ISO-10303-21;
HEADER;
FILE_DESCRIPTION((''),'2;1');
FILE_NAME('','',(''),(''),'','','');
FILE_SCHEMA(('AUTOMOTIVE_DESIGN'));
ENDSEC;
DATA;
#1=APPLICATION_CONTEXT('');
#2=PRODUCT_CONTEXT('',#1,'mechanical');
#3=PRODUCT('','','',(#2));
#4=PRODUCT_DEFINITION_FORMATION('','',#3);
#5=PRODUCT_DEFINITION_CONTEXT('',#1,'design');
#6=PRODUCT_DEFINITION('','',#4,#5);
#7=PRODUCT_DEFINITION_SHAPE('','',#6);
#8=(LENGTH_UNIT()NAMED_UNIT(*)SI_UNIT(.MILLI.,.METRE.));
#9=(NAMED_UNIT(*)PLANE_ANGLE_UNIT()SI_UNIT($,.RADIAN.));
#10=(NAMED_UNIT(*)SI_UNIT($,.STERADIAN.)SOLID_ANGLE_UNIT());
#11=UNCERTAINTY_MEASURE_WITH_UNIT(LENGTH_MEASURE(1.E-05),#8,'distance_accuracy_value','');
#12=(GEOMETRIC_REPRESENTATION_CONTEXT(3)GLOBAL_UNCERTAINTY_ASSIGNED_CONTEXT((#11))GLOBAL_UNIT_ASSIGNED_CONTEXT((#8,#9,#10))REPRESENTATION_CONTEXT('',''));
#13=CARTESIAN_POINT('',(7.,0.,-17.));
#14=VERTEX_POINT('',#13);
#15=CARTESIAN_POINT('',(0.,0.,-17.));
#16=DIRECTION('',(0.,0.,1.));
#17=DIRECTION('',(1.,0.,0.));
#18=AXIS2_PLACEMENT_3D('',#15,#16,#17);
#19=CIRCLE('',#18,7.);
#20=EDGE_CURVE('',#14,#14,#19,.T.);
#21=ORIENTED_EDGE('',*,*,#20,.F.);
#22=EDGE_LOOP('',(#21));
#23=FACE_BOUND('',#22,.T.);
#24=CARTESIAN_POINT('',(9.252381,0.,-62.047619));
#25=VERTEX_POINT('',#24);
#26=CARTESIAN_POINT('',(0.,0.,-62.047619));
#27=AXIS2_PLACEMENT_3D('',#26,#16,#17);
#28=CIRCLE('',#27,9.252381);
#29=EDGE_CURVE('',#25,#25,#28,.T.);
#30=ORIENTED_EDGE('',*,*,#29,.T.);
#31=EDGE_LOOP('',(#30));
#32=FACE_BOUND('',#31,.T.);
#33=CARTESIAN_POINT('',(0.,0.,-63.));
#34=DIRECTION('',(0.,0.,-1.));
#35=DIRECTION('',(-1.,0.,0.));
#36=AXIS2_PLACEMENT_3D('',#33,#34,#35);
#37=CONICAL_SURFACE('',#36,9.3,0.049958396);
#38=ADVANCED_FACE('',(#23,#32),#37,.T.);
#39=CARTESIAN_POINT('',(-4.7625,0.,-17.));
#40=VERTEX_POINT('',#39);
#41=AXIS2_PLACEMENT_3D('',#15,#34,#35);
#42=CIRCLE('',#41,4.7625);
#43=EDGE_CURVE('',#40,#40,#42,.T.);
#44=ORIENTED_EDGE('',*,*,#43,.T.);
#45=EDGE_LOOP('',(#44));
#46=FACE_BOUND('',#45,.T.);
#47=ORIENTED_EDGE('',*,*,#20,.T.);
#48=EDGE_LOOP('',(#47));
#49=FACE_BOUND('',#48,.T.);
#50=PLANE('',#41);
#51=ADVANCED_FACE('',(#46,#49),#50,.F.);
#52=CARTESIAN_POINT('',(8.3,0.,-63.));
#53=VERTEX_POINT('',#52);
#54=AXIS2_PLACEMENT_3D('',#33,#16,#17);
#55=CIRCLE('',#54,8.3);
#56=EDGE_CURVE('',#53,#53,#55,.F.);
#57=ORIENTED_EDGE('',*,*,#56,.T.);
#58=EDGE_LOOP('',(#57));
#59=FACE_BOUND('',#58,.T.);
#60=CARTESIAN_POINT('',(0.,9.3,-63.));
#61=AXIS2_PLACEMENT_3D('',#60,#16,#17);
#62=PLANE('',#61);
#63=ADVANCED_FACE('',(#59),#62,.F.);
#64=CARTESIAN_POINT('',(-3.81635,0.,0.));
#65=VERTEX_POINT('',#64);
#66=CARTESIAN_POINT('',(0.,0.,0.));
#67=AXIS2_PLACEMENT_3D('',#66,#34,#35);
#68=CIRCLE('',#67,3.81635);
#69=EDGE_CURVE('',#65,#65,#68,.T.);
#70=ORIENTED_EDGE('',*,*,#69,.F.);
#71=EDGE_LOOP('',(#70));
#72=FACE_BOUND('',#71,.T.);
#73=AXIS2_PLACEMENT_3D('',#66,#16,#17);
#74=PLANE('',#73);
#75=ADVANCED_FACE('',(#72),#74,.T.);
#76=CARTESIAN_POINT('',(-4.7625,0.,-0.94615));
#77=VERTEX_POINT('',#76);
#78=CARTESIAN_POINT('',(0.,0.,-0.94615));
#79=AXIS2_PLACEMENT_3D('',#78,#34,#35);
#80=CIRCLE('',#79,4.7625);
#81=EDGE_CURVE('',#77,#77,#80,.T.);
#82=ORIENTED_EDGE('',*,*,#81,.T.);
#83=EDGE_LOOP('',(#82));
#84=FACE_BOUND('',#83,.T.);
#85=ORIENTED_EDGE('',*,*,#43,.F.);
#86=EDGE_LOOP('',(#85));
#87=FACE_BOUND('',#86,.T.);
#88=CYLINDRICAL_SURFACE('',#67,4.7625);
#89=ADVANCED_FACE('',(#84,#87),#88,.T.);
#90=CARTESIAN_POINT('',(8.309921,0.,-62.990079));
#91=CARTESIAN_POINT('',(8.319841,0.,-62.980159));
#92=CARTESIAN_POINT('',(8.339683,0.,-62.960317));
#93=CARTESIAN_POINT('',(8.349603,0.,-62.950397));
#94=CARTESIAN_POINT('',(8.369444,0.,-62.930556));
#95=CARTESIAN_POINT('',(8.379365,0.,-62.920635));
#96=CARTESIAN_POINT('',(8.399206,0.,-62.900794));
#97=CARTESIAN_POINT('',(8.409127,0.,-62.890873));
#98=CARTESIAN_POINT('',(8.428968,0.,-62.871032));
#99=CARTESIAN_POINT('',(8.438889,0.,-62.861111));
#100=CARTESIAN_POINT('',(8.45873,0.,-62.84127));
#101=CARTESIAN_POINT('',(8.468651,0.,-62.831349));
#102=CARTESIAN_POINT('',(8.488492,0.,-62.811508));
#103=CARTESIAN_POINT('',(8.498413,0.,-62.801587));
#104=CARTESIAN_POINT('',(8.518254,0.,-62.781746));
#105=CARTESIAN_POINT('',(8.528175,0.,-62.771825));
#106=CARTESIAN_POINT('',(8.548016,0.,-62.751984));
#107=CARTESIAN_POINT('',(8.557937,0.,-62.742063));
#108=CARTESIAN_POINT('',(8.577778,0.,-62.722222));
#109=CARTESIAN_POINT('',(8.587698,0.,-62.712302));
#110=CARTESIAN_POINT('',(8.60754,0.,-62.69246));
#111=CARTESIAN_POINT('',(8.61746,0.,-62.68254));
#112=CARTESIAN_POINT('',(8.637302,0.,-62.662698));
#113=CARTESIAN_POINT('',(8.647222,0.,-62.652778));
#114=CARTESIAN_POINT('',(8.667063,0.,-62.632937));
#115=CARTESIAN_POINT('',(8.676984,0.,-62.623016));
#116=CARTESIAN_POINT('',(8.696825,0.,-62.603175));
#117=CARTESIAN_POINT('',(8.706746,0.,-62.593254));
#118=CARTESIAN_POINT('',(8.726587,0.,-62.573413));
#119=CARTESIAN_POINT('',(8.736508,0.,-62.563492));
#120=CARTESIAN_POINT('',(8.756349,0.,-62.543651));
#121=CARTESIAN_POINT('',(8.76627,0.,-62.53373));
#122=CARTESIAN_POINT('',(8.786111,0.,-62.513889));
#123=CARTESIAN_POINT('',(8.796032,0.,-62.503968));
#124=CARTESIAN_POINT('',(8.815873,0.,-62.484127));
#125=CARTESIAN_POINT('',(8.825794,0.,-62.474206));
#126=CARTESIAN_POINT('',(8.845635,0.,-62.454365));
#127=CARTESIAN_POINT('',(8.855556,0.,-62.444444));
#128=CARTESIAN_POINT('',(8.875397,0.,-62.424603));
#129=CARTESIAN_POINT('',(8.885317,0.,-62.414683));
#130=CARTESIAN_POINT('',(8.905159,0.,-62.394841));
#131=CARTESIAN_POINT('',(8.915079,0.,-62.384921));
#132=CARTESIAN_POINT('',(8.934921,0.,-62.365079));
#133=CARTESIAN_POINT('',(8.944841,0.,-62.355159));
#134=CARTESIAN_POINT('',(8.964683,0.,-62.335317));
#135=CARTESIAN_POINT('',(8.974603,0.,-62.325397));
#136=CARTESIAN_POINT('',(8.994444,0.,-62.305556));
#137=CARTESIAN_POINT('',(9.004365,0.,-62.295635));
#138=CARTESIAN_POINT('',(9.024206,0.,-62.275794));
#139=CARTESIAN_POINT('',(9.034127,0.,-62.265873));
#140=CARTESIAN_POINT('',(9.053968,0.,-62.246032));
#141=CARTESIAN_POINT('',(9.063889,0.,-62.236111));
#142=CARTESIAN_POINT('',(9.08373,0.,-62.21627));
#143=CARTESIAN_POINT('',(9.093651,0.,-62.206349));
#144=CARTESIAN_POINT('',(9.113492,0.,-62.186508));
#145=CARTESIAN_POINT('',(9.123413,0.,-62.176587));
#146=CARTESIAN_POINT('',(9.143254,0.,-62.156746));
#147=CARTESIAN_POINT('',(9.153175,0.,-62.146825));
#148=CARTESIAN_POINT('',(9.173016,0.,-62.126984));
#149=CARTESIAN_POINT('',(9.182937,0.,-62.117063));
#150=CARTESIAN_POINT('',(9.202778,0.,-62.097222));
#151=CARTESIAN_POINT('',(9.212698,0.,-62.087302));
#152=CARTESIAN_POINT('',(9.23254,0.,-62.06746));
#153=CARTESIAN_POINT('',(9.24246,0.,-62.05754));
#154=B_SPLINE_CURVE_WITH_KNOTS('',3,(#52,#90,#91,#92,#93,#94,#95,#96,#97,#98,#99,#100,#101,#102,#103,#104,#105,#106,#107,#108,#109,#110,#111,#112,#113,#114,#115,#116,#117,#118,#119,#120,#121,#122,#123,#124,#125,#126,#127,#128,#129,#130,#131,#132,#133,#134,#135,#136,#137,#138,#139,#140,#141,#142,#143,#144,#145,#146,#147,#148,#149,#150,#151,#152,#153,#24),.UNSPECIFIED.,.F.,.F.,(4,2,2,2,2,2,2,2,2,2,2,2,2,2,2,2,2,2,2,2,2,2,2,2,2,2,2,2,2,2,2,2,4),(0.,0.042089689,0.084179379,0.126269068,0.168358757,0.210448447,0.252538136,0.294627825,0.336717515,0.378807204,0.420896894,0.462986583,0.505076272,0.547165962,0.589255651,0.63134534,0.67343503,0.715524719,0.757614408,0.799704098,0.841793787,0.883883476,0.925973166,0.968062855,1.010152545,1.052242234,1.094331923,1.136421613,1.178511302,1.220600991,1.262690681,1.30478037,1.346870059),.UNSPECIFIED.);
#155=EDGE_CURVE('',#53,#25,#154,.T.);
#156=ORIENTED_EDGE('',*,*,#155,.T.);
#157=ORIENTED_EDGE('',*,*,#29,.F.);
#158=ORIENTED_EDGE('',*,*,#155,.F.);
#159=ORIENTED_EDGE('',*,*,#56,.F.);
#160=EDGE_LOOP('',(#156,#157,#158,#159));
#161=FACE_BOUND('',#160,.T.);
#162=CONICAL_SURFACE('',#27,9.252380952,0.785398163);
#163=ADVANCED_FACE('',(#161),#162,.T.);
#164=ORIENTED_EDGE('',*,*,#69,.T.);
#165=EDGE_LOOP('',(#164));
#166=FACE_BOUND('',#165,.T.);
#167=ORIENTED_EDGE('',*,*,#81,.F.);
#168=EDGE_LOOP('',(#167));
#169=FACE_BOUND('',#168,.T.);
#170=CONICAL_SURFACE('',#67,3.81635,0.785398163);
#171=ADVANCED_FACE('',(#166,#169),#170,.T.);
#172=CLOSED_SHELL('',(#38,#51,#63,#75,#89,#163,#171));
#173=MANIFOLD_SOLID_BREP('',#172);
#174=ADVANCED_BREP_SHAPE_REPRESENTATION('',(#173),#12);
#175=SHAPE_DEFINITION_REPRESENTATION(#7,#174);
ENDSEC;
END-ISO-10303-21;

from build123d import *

# Parameters (mm, degrees)
SKETCH_1_R      = 5
EXTRUDE_1_DEPTH = 17
CHAMFER_1_SIZE  = 1
CHAMFER_1_SIZE2 = 0.953570685


# Read off the part's stored shape, not the designer's step: 3/8-16 机械螺纹 螺柱1
with BuildPart() as part:
    # 草图1 → 凸台-拉伸1 (new body)
    with BuildSketch(Plane.XY):
        Circle(SKETCH_1_R)
    extrude(amount=-EXTRUDE_1_DEPTH)

    # 3/8-16 机械螺纹 螺柱1 outline → 3/8-16 机械螺纹 螺柱1 (revolve, cut)
    with BuildSketch(Plane.XZ):
        Polygon((5, 0), (3.81635, 0), (4.7625, -0.94615), (4.7625, -17), (5, -17), align=None)
    revolve(axis=Axis((0, 0, 0), (0, 0, 1)), mode=Mode.SUBTRACT)

    # 草图4 → 旋转1 (revolve)
    with BuildSketch(Plane(origin=(0, 0, 0), x_dir=(0, 0, -1), z_dir=(1, 0, 0)), mode=Mode.PRIVATE) as revolve_1_sk:
        Polygon((17, 0), (37.344329095, 0), (63, 0), (63, 9.3), (17, 7), align=None)
    revolve(revolve_1_sk.sketch.rotate(Axis((0, 0, -37.344329095), (0, 0, -1)), 270), axis=Axis((0, 0, -37.344329095), (0, 0, -1)))

    # 倒角1
    chamfer_1_edges = [part.edges().sort_by_distance(p)[0] for p in [
        (9.3, 0, -63),
    ]]
    chamfer_1_side = [part.faces().sort_by_distance(p)[0] for p in [
        (0, 0, -63),
    ]]
    chamfer(chamfer_1_edges, length=CHAMFER_1_SIZE, length2=CHAMFER_1_SIZE2, reference=chamfer_1_side[0])


solid = part.part
